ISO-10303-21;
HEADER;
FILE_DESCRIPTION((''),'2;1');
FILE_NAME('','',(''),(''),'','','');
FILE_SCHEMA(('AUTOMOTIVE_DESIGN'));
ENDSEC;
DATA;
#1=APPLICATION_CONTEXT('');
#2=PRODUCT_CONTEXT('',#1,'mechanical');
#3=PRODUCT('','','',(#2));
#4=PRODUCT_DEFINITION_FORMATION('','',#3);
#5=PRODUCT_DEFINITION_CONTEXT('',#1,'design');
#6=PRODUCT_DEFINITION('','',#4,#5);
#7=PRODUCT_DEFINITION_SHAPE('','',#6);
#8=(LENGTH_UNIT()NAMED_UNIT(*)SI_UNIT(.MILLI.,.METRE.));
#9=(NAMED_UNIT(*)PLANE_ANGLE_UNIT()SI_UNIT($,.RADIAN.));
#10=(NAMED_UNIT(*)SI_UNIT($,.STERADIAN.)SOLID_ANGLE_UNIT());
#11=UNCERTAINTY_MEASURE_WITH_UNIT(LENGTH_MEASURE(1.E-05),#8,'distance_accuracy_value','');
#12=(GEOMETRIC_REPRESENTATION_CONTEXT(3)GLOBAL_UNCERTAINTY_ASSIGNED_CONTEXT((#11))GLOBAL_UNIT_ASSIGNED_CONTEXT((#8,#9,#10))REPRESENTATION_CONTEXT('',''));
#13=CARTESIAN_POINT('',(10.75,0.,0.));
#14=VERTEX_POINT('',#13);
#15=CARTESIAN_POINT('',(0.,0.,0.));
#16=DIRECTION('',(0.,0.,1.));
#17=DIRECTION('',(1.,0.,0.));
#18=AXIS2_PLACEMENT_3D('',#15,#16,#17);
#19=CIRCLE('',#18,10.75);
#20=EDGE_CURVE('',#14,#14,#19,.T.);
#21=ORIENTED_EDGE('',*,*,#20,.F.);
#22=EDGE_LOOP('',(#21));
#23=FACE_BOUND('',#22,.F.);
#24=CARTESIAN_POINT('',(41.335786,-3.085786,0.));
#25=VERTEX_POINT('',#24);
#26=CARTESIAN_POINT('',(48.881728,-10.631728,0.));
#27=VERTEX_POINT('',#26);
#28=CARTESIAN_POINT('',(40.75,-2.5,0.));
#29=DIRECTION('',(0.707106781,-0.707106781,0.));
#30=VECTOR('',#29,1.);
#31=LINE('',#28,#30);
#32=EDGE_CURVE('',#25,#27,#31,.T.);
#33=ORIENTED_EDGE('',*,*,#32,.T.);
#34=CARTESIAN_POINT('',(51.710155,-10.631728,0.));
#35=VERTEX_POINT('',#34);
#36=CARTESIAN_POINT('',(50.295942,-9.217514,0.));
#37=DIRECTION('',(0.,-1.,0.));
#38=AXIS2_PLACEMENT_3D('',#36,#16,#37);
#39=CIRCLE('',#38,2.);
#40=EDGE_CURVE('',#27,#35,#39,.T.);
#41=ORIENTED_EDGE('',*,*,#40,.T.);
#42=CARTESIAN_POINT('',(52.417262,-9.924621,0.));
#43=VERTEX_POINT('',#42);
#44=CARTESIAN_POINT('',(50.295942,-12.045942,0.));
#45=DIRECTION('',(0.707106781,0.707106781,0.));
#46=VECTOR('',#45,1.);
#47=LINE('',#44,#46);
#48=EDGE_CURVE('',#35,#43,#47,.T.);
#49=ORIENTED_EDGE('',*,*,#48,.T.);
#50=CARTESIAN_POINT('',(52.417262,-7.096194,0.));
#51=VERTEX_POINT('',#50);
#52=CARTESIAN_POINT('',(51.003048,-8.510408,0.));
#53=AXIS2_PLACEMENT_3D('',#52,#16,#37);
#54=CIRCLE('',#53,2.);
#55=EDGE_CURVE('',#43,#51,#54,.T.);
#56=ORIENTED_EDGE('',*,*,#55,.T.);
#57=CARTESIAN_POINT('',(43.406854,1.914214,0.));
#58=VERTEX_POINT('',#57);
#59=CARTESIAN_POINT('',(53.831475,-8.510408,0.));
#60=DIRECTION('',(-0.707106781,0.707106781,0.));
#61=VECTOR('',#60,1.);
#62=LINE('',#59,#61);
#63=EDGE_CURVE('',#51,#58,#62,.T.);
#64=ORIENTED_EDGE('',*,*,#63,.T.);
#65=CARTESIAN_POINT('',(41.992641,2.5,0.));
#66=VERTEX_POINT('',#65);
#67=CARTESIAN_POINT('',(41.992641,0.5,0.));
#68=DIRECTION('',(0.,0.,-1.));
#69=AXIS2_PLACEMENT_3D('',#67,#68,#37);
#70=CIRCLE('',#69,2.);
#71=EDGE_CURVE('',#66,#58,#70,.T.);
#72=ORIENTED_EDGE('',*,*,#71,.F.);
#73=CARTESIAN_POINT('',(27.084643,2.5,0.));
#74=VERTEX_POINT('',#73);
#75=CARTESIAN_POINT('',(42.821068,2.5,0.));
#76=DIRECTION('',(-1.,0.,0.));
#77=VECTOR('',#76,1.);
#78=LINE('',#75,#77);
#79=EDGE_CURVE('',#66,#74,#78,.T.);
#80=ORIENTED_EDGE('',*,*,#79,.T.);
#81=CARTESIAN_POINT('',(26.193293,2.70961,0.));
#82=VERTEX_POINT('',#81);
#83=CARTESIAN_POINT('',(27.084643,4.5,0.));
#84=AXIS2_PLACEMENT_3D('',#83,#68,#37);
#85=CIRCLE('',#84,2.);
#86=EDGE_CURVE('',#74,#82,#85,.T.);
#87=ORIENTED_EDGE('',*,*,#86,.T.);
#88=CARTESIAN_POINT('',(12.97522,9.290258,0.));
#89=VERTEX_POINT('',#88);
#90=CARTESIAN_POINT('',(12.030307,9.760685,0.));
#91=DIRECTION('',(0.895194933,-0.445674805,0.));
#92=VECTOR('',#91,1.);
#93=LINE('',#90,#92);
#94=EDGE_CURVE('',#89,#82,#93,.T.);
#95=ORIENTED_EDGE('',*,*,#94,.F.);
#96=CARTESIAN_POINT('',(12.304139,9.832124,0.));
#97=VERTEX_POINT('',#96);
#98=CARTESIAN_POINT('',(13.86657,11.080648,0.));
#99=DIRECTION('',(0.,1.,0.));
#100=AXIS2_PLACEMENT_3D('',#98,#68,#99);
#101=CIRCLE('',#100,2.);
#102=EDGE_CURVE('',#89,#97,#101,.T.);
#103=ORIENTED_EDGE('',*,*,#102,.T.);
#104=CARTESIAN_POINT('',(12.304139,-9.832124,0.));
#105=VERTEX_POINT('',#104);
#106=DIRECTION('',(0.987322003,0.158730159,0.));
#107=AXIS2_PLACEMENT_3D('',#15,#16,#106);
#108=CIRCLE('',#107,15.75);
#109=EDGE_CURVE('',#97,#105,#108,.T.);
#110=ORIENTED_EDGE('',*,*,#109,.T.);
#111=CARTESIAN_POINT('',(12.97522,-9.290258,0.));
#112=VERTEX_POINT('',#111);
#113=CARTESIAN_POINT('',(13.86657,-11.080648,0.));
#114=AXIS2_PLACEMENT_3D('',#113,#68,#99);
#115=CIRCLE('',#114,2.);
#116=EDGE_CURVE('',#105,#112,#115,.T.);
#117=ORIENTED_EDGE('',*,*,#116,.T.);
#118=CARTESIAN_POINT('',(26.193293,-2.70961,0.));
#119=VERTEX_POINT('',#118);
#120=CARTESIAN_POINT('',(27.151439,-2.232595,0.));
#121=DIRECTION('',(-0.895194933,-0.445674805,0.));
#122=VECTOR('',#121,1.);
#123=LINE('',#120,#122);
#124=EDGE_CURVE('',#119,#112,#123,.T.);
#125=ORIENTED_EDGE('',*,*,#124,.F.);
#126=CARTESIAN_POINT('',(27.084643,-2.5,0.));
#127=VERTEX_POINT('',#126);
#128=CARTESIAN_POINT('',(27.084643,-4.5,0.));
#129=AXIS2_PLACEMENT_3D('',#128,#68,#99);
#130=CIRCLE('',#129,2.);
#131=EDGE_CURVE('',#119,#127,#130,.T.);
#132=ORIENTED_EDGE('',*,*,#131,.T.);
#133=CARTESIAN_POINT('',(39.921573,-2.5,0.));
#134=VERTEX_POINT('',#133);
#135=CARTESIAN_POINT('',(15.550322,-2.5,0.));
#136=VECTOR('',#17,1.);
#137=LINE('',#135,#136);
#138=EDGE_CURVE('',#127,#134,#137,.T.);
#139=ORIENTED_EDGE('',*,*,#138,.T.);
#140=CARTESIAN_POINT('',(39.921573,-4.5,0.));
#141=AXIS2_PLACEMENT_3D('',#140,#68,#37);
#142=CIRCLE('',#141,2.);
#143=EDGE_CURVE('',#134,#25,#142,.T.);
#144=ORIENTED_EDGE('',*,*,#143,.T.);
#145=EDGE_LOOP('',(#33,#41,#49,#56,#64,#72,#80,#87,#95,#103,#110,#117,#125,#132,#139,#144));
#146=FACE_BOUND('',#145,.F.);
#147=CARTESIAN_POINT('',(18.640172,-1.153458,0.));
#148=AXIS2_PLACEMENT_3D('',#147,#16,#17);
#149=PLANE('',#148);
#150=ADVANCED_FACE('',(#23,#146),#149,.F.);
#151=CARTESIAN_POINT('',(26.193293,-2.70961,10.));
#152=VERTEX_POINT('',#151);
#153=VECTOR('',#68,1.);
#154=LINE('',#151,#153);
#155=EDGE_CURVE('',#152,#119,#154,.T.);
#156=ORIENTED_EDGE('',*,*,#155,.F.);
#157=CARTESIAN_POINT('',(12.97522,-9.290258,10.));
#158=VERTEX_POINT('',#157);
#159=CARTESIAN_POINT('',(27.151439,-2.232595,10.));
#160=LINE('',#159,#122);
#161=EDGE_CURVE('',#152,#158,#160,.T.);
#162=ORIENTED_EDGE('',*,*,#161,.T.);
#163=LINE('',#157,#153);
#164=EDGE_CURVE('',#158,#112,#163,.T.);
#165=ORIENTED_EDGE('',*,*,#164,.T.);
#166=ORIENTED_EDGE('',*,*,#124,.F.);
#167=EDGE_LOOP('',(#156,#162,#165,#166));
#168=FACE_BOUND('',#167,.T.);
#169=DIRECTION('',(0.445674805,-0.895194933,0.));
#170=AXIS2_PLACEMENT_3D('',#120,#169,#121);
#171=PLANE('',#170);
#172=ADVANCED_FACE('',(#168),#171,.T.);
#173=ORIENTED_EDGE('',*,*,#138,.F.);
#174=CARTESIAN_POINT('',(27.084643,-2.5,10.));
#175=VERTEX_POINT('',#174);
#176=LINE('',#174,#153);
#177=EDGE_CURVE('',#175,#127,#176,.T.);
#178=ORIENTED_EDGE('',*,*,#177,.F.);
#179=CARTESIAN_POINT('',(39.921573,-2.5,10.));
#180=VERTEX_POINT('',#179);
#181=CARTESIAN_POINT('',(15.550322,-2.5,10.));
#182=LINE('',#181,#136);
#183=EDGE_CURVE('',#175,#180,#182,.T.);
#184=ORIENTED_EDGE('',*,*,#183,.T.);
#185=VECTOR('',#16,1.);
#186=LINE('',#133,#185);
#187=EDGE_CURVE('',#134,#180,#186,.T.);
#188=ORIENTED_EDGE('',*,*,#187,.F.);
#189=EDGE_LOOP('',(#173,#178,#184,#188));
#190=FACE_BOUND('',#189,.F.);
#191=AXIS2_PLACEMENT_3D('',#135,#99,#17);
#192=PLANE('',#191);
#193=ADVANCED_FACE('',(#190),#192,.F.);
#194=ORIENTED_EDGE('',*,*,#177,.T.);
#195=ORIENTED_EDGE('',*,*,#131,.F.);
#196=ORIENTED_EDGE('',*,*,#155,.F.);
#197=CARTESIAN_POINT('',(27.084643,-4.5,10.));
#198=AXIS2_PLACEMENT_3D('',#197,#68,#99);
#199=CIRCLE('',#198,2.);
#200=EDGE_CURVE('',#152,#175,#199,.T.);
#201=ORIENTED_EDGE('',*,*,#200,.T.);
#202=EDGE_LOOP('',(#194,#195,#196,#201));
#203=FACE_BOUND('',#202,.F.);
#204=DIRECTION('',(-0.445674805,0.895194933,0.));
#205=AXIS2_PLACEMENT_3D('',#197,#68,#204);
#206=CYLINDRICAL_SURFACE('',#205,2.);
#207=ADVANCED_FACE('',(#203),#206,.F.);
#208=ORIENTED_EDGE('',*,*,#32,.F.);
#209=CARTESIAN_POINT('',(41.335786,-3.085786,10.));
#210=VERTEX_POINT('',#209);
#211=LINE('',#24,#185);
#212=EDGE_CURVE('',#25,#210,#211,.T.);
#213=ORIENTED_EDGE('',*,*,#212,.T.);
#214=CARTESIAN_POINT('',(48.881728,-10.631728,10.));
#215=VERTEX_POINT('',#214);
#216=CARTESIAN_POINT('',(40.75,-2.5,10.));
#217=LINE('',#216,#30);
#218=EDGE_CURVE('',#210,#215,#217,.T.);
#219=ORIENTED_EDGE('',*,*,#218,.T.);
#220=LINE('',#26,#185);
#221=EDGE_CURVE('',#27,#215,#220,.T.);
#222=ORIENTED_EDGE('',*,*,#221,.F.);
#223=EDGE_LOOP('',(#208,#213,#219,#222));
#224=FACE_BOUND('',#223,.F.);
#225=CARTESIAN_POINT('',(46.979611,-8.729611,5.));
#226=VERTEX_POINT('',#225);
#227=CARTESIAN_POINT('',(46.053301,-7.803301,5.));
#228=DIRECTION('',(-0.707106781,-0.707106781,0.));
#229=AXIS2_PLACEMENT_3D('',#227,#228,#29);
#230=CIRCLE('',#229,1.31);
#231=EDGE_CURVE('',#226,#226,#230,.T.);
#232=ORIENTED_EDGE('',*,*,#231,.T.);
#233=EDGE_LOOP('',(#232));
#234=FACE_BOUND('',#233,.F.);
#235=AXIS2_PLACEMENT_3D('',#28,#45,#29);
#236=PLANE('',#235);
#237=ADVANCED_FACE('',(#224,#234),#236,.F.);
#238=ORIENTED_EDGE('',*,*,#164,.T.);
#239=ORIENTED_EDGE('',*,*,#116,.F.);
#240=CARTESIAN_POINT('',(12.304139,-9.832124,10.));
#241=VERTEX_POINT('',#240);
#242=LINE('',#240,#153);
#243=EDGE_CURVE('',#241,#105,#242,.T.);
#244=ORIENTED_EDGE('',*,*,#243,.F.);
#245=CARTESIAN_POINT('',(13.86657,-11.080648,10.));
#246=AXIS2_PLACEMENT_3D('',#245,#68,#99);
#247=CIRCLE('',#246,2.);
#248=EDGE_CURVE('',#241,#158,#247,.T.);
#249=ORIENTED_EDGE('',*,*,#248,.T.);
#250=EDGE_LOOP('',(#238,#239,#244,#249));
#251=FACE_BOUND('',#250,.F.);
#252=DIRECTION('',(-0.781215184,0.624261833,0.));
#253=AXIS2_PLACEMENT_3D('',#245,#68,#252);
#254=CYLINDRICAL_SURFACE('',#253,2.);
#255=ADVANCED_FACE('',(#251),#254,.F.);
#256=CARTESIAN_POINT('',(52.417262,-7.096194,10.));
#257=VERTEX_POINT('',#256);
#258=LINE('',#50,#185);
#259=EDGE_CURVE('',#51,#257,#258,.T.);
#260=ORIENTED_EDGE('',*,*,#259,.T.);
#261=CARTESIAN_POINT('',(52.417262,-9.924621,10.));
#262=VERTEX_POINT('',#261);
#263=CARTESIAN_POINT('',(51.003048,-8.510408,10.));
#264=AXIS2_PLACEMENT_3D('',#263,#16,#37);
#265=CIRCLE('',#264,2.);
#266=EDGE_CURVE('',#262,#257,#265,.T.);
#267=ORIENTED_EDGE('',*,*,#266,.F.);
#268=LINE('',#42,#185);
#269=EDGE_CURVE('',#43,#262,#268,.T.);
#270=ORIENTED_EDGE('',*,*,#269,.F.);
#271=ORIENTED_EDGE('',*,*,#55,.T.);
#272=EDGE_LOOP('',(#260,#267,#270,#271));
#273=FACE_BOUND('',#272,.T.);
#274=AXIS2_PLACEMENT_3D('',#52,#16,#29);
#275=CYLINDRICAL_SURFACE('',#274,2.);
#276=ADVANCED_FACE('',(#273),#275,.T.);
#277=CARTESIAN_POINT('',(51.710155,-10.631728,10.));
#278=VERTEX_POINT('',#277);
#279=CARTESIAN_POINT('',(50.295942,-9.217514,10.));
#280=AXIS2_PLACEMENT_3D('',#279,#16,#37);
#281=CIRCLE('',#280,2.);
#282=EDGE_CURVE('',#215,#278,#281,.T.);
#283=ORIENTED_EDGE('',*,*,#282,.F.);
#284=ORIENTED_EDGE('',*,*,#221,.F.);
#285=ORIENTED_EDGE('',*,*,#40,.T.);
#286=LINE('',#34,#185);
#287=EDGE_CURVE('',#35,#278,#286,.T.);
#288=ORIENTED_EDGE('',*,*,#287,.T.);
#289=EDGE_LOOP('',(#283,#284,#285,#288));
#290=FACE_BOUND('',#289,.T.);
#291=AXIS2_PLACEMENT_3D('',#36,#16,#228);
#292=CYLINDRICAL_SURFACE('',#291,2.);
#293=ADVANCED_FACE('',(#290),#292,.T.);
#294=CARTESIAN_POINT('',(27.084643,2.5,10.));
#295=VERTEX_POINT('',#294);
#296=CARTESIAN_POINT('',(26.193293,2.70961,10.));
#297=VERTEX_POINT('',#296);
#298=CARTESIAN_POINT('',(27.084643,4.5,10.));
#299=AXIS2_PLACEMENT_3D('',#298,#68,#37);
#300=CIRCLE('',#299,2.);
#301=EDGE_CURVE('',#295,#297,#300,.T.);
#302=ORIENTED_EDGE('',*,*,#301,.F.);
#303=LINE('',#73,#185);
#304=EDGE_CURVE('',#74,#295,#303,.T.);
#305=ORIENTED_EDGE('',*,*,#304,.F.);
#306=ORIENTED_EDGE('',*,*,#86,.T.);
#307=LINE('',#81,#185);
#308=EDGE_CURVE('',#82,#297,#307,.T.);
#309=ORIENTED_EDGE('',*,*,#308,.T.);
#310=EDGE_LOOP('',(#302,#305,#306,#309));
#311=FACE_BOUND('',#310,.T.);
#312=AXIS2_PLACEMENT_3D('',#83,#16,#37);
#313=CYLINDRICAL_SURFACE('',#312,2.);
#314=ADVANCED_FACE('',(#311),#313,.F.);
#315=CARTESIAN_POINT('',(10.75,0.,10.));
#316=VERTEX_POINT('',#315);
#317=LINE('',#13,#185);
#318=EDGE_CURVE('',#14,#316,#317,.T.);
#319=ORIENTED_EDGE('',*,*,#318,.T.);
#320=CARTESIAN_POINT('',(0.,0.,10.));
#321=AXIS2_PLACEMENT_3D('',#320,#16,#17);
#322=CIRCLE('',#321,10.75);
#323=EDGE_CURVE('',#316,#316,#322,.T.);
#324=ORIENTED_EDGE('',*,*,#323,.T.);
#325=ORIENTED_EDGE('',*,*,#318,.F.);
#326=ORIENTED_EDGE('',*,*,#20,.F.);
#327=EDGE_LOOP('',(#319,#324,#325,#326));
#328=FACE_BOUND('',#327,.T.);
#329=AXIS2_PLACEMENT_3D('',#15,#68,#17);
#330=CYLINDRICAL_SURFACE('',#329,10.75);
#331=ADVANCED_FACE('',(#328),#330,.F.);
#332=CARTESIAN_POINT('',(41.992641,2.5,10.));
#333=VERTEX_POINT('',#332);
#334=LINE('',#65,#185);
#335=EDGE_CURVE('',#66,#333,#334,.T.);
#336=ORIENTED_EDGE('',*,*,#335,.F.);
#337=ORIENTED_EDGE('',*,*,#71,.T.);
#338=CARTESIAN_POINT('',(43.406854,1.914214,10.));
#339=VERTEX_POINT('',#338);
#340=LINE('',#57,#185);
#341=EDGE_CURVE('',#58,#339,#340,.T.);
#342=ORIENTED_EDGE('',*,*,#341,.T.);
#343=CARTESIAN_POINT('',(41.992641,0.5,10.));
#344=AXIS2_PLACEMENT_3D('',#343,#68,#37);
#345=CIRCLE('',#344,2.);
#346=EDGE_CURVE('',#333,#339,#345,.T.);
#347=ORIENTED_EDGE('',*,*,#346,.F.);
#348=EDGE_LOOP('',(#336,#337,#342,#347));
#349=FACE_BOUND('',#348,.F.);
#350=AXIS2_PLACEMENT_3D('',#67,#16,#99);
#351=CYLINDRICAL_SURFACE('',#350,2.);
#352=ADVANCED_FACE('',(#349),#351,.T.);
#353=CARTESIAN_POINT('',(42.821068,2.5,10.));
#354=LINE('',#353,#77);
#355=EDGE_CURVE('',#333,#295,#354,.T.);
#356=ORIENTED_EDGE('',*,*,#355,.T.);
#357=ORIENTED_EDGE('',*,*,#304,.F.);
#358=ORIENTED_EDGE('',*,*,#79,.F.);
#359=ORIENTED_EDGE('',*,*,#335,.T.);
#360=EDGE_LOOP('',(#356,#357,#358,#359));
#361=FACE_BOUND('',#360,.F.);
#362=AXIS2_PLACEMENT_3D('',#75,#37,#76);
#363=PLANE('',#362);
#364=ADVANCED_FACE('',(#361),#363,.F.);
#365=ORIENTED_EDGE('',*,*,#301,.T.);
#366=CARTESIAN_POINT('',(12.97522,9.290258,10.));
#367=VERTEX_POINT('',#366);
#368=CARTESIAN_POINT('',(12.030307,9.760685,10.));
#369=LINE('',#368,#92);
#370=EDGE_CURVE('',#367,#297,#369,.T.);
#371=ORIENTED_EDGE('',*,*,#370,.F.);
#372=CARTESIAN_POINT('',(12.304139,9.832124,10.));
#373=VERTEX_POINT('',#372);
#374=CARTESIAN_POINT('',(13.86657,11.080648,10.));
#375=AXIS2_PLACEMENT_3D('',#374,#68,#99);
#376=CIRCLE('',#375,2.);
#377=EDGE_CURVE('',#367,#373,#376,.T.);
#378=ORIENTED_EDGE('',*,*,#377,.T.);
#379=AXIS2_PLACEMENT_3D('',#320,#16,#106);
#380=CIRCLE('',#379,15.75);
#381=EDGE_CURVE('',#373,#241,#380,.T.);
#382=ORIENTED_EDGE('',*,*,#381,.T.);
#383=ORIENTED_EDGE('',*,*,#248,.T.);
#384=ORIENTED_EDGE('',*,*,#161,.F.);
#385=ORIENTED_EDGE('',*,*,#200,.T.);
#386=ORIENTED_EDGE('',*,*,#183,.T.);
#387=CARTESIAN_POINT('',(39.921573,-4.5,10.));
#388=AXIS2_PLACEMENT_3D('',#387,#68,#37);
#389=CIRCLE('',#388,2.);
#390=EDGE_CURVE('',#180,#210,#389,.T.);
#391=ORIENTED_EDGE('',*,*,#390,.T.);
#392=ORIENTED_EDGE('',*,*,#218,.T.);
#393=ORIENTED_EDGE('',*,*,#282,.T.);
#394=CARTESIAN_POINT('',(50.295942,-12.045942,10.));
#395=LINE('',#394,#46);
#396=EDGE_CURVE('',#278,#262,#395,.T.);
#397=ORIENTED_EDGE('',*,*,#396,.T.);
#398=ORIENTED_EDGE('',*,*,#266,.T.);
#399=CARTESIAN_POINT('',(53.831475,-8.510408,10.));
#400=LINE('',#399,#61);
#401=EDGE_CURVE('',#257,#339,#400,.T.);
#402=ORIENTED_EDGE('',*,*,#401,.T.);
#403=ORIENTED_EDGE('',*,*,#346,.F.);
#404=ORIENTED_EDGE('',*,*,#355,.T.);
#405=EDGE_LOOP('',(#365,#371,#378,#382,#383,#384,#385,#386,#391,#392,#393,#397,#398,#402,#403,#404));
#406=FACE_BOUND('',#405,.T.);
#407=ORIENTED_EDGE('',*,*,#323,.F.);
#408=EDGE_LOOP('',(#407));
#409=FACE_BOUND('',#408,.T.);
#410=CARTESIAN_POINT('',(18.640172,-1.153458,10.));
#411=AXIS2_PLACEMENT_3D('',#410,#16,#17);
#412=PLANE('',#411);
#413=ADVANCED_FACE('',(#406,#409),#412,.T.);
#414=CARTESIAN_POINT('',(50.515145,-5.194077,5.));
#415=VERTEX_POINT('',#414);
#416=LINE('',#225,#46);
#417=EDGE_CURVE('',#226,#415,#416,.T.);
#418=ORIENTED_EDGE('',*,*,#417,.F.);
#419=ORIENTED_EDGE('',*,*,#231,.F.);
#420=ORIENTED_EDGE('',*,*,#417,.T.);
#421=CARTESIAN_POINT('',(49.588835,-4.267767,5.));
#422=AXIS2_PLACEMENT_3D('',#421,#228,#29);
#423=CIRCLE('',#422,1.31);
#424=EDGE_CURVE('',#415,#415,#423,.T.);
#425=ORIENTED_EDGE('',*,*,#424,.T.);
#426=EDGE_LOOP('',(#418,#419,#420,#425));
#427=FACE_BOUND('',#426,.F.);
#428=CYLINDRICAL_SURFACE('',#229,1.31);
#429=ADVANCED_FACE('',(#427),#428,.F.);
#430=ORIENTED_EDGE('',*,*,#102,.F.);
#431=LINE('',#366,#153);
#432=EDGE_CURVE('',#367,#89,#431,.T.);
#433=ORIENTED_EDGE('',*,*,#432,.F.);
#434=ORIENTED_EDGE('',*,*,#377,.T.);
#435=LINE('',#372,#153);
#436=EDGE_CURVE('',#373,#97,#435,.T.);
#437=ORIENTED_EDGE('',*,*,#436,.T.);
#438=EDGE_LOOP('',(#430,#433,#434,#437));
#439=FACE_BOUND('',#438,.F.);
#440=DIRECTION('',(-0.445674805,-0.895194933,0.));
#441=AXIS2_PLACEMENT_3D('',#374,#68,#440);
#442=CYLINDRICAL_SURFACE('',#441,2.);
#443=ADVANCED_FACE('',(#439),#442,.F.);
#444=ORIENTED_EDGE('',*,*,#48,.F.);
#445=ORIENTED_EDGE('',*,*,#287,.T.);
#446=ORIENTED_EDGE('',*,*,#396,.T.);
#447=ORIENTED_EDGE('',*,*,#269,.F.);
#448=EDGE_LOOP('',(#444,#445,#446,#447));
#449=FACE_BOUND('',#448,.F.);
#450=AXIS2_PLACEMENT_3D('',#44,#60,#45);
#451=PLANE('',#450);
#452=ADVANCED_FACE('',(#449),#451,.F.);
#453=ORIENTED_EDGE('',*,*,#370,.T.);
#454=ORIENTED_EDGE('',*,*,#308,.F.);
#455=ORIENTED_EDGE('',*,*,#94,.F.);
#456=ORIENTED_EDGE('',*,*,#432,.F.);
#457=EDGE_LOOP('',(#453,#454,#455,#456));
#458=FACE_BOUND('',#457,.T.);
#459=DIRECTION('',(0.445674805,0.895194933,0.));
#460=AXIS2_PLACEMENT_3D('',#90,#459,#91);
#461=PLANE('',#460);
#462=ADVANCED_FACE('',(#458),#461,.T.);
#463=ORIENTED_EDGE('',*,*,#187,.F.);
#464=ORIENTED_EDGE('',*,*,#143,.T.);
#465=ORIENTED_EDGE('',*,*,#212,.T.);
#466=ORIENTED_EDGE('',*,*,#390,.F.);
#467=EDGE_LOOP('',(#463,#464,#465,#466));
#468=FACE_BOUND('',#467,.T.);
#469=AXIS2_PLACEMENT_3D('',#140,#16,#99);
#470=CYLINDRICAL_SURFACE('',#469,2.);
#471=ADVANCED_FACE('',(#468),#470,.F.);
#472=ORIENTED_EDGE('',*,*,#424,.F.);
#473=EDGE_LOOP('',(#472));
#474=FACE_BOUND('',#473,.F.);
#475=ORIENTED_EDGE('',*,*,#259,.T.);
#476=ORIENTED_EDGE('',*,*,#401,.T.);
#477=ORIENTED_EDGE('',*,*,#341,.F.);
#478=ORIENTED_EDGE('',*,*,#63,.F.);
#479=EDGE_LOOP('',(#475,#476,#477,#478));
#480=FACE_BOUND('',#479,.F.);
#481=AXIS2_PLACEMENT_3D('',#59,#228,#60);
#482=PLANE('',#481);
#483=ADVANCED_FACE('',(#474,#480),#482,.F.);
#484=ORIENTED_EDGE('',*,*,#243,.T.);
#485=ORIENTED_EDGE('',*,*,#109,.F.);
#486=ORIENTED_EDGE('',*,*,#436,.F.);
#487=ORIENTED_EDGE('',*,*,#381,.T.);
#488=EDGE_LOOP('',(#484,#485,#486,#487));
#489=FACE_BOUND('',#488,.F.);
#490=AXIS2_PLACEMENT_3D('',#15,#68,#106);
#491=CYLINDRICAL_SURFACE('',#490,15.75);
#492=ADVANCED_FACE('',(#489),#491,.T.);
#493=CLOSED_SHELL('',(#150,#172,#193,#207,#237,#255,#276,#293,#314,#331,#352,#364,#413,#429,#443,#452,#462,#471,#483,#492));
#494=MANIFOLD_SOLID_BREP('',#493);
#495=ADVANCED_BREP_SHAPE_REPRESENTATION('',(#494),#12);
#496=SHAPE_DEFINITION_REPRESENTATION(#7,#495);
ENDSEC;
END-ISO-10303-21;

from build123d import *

# Parameters (mm, degrees)
F0_R        = 10.75
F1_DEPTH    = 10
F2_T1_DEPTH = 10
F3_R        = 1.31
F4_DEPTH    = 25
F5_R        = 2


# Not quite as in the source:
# - a fillet or chamfer that OpenCascade refuses, or shapes differently, is made with other operations: its cross-section is extruded or revolved along the edge and cut away or added


with BuildPart() as f1:
    # F0 (on Top) → F1 (new body)
    with BuildSketch(Plane.XY):
        with BuildLine():
            Line((40.75, 2.5), (15.5503215401, 2.5))
            ThreePointArc((15.5503215401, 2.5), (-15.75, 0), (15.5503215401, -2.5))
            Line((15.5503215401, -2.5), (40.75, -2.5))
            Line((40.75, -2.5), (50.295941546, -12.045941546))
            Line((50.295941546, -12.045941546), (53.831475452, -8.5104076401))
            Line((53.831475452, -8.5104076401), (42.8210678119, 2.5))
            Line((42.8210678119, 2.5), (40.75, 2.5))
        make_face()
        Circle(F0_R, mode=Mode.SUBTRACT)
    extrude(amount=F1_DEPTH)

    # F2: chamfer of 15 on 2 edges, made by hand

    # F2_s2 → F2_t1 (join)
    with BuildSketch(Plane.XY):
        with BuildLine():
            Line((27.1514391605, -2.2325951169), (12.0303066019, -9.7606848759))
            Line((12.0303066019, -9.7606848759), (11.7909271055, -9.579860495))
            ThreePointArc((11.7909271055, -9.579860495), (14.1178891417, -6.2759625701), (15.2541249393, -2.4523809524))
            Line((15.2541249393, -2.4523809524), (15.5503215401, -2.2))
            ThreePointArc((15.5503215401, -2.2), (21.3508803503, -2.2), (27.1514391605, -1.9325951169))
            Line((27.1514391605, -1.9325951169), (27.1514391605, -2.2325951169))
        make_face()
        with BuildLine():
            Line((12.0303066019, 9.7606848759), (27.1514391605, 2.2325951169))
            Line((27.1514391605, 2.2325951169), (27.1514391605, 1.9325951169))
            ThreePointArc((27.1514391605, 1.9325951169), (21.3508803503, 2.2), (15.5503215401, 2.2))
            Line((15.5503215401, 2.2), (15.2541249393, 2.4523809524))
            ThreePointArc((15.2541249393, 2.4523809524), (14.1178891417, 6.2759625701), (11.7909271055, 9.579860495))
            Line((11.7909271055, 9.579860495), (12.0303066019, 9.7606848759))
        make_face()
    extrude(amount=F2_T1_DEPTH)

    # F3 (on face) → F4 (cut)
    with BuildSketch(Plane(origin=(19.125, 19.125, 0), x_dir=(0.7071067812, -0.7071067812, 0), z_dir=(-0.7071067812, -0.7071067812, 0))):
        with Locations((38.0823682863, 5)):
            Circle(F3_R)
    extrude(amount=-F4_DEPTH, mode=Mode.SUBTRACT)

    # F5
    f5_edges = [f1.edges().sort_by_distance(p)[0] for p in [
        (50.295942, -12.045942, 5),
        (53.831475, -8.510408, 5),
        (40.75, -2.5, 5),
        (26.614322, -2.5, 5),
        (12.567424, -9.49328, 5),
        (42.821068, 2.5, 5),
        (26.614322, 2.5, 5),
        (12.567424, 9.49328, 5),
    ]]
    fillet(f5_edges, radius=F5_R)


solid = f1.part
